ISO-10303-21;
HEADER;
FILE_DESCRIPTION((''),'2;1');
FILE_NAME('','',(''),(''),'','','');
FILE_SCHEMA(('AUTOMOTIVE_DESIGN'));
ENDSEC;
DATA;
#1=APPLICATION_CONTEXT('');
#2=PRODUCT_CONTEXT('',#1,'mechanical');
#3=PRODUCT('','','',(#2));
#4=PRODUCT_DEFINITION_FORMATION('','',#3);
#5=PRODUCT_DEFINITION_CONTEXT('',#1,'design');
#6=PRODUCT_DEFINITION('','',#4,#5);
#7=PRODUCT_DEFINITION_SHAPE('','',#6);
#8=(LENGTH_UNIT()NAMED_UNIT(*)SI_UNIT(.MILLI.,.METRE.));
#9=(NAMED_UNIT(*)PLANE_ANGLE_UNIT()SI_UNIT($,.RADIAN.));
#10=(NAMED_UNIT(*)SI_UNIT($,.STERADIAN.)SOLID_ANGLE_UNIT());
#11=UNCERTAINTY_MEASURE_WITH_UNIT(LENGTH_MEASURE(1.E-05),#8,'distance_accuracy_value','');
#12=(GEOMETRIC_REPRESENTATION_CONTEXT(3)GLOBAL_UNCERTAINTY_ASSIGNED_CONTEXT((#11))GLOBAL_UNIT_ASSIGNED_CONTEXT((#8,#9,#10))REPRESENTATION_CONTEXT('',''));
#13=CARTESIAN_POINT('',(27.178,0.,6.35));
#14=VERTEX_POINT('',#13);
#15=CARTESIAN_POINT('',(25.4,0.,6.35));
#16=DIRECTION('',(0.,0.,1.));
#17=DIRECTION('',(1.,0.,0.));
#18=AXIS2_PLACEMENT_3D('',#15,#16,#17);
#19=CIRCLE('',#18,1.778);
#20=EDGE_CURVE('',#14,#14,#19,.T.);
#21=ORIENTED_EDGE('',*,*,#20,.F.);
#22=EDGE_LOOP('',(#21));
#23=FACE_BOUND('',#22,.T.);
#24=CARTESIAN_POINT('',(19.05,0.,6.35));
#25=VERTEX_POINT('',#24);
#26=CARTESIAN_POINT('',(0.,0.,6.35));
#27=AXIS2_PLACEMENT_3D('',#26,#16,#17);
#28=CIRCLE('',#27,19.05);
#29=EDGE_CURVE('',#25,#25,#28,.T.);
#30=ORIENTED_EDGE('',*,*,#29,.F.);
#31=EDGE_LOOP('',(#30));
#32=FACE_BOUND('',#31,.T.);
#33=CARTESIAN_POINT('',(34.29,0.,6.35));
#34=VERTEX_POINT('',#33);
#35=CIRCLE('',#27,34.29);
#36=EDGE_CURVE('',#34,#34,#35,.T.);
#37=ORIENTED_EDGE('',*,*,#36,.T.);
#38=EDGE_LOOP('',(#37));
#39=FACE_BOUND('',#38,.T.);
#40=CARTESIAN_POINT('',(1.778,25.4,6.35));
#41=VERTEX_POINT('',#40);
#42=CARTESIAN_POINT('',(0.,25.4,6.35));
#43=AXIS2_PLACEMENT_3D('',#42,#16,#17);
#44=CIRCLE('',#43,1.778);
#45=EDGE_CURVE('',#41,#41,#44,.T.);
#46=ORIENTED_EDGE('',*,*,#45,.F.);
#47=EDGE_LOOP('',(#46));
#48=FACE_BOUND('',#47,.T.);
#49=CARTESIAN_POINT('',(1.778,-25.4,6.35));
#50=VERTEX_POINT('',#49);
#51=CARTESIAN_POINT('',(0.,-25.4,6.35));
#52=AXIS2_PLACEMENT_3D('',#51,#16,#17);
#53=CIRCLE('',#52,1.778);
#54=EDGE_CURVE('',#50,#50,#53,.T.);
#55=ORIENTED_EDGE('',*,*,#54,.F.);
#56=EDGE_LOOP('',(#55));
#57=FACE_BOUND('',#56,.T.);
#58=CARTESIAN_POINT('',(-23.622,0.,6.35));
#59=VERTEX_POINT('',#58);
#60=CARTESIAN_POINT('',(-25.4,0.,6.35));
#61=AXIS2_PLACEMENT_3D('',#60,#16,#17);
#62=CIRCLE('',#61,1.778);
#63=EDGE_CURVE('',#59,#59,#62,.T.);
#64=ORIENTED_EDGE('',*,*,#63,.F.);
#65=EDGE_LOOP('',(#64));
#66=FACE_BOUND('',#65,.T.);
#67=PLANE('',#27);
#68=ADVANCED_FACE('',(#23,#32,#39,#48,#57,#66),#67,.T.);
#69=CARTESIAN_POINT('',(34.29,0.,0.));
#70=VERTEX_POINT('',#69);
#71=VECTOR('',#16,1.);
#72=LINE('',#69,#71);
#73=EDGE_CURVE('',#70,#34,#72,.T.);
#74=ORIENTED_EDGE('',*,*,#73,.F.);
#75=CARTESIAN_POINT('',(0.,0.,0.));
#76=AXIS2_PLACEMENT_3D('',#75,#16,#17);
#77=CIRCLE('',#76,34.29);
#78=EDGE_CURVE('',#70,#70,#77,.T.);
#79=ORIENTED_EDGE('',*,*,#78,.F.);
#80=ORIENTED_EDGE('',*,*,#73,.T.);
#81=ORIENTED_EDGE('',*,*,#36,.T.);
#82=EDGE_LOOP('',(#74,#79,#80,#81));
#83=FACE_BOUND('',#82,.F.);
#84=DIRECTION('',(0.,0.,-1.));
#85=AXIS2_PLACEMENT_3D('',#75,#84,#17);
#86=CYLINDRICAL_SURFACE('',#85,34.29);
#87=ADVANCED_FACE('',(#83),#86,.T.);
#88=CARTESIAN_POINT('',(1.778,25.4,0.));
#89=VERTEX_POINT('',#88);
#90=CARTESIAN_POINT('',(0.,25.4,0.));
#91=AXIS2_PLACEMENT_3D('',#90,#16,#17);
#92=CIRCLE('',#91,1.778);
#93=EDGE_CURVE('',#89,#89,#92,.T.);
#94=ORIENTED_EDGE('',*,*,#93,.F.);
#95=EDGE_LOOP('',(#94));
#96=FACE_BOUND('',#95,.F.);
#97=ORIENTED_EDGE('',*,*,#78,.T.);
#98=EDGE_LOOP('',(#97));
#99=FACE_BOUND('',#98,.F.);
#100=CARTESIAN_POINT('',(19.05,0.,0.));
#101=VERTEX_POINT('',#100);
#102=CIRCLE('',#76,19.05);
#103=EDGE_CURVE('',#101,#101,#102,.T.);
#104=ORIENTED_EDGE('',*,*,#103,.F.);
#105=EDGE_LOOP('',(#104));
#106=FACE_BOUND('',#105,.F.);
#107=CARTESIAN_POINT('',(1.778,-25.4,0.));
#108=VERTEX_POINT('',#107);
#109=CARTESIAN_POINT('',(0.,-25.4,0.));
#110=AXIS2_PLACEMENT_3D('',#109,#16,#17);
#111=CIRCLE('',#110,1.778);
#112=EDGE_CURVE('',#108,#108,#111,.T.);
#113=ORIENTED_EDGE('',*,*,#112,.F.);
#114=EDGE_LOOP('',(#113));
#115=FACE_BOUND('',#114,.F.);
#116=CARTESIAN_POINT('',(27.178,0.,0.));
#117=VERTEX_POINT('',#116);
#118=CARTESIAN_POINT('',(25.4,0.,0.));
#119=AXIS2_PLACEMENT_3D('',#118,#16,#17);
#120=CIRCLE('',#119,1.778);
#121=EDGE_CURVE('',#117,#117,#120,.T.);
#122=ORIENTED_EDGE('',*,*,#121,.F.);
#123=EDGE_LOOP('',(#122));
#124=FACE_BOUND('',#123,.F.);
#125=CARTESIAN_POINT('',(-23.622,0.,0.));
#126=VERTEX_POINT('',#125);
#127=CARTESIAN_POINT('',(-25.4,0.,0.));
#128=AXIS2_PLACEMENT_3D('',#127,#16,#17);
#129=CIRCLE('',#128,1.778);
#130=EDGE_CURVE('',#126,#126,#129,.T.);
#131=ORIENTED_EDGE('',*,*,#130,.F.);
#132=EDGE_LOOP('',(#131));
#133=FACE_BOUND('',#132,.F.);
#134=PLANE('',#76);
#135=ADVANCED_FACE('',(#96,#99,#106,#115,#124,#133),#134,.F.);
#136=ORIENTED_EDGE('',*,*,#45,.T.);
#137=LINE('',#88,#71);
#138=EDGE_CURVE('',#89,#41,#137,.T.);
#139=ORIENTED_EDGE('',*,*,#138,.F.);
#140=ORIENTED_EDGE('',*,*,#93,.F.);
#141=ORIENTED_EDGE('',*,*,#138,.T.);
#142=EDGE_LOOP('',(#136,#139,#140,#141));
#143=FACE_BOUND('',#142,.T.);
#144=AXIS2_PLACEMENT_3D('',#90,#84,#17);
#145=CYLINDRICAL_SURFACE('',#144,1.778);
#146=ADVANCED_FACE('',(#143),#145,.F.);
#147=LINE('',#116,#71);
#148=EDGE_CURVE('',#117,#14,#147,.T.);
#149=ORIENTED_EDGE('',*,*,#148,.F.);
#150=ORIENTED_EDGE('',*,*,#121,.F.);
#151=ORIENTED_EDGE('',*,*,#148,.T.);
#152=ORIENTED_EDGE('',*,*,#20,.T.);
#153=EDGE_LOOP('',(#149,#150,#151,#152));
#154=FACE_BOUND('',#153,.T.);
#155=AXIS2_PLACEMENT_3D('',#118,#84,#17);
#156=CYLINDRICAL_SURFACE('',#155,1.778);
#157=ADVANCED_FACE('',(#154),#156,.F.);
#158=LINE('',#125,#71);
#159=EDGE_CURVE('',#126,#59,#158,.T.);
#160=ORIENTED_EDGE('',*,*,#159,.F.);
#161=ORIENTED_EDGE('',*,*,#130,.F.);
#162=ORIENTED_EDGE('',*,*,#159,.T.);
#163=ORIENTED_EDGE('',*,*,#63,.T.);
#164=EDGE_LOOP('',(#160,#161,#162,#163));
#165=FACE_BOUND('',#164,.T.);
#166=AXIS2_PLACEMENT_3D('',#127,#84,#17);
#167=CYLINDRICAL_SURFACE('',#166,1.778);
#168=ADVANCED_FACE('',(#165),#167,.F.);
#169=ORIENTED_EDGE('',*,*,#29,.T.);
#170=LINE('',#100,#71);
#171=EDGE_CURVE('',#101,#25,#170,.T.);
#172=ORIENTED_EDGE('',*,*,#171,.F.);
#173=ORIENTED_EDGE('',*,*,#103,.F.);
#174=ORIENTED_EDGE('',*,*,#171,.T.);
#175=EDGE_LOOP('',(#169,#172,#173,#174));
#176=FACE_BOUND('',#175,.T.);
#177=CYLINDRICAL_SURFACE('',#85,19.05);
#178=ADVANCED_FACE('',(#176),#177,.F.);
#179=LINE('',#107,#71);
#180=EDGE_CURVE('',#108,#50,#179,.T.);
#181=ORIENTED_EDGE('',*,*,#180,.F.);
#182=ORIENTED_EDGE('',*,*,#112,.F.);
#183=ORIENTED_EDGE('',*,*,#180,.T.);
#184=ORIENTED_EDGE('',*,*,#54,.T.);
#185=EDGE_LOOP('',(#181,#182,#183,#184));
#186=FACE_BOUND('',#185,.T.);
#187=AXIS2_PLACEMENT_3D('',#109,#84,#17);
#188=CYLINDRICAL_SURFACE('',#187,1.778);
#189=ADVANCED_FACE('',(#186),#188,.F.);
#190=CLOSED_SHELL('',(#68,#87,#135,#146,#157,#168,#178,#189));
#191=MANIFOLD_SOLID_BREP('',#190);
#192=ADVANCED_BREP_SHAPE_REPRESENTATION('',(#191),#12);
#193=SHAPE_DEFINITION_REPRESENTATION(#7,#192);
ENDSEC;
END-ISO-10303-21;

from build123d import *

# Parameters (mm, degrees)
F0_R     = 34.29
F0_R_2   = 1.778
F0_R_3   = 19.05
F1_DEPTH = 6.35


# Not quite as in the source:
# - a length typed as a fraction of an inch, garbled in the dataset ("3 / 203.2 mm" for 3/8 in), is restored


with BuildPart() as f1:
    # F0 (on Top) → F1 (new body)
    with BuildSketch(Plane.XY):
        Circle(F0_R)
        with Locations((0, -25.4)):
            Circle(F0_R_2, mode=Mode.SUBTRACT)
        with Locations((-25.4, 0)):
            Circle(F0_R_2, mode=Mode.SUBTRACT)
        Circle(F0_R_3, mode=Mode.SUBTRACT)
        with Locations((25.4, 0)):
            Circle(F0_R_2, mode=Mode.SUBTRACT)
        with Locations((0, 25.4)):
            Circle(F0_R_2, mode=Mode.SUBTRACT)
    extrude(amount=F1_DEPTH)


solid = f1.part
